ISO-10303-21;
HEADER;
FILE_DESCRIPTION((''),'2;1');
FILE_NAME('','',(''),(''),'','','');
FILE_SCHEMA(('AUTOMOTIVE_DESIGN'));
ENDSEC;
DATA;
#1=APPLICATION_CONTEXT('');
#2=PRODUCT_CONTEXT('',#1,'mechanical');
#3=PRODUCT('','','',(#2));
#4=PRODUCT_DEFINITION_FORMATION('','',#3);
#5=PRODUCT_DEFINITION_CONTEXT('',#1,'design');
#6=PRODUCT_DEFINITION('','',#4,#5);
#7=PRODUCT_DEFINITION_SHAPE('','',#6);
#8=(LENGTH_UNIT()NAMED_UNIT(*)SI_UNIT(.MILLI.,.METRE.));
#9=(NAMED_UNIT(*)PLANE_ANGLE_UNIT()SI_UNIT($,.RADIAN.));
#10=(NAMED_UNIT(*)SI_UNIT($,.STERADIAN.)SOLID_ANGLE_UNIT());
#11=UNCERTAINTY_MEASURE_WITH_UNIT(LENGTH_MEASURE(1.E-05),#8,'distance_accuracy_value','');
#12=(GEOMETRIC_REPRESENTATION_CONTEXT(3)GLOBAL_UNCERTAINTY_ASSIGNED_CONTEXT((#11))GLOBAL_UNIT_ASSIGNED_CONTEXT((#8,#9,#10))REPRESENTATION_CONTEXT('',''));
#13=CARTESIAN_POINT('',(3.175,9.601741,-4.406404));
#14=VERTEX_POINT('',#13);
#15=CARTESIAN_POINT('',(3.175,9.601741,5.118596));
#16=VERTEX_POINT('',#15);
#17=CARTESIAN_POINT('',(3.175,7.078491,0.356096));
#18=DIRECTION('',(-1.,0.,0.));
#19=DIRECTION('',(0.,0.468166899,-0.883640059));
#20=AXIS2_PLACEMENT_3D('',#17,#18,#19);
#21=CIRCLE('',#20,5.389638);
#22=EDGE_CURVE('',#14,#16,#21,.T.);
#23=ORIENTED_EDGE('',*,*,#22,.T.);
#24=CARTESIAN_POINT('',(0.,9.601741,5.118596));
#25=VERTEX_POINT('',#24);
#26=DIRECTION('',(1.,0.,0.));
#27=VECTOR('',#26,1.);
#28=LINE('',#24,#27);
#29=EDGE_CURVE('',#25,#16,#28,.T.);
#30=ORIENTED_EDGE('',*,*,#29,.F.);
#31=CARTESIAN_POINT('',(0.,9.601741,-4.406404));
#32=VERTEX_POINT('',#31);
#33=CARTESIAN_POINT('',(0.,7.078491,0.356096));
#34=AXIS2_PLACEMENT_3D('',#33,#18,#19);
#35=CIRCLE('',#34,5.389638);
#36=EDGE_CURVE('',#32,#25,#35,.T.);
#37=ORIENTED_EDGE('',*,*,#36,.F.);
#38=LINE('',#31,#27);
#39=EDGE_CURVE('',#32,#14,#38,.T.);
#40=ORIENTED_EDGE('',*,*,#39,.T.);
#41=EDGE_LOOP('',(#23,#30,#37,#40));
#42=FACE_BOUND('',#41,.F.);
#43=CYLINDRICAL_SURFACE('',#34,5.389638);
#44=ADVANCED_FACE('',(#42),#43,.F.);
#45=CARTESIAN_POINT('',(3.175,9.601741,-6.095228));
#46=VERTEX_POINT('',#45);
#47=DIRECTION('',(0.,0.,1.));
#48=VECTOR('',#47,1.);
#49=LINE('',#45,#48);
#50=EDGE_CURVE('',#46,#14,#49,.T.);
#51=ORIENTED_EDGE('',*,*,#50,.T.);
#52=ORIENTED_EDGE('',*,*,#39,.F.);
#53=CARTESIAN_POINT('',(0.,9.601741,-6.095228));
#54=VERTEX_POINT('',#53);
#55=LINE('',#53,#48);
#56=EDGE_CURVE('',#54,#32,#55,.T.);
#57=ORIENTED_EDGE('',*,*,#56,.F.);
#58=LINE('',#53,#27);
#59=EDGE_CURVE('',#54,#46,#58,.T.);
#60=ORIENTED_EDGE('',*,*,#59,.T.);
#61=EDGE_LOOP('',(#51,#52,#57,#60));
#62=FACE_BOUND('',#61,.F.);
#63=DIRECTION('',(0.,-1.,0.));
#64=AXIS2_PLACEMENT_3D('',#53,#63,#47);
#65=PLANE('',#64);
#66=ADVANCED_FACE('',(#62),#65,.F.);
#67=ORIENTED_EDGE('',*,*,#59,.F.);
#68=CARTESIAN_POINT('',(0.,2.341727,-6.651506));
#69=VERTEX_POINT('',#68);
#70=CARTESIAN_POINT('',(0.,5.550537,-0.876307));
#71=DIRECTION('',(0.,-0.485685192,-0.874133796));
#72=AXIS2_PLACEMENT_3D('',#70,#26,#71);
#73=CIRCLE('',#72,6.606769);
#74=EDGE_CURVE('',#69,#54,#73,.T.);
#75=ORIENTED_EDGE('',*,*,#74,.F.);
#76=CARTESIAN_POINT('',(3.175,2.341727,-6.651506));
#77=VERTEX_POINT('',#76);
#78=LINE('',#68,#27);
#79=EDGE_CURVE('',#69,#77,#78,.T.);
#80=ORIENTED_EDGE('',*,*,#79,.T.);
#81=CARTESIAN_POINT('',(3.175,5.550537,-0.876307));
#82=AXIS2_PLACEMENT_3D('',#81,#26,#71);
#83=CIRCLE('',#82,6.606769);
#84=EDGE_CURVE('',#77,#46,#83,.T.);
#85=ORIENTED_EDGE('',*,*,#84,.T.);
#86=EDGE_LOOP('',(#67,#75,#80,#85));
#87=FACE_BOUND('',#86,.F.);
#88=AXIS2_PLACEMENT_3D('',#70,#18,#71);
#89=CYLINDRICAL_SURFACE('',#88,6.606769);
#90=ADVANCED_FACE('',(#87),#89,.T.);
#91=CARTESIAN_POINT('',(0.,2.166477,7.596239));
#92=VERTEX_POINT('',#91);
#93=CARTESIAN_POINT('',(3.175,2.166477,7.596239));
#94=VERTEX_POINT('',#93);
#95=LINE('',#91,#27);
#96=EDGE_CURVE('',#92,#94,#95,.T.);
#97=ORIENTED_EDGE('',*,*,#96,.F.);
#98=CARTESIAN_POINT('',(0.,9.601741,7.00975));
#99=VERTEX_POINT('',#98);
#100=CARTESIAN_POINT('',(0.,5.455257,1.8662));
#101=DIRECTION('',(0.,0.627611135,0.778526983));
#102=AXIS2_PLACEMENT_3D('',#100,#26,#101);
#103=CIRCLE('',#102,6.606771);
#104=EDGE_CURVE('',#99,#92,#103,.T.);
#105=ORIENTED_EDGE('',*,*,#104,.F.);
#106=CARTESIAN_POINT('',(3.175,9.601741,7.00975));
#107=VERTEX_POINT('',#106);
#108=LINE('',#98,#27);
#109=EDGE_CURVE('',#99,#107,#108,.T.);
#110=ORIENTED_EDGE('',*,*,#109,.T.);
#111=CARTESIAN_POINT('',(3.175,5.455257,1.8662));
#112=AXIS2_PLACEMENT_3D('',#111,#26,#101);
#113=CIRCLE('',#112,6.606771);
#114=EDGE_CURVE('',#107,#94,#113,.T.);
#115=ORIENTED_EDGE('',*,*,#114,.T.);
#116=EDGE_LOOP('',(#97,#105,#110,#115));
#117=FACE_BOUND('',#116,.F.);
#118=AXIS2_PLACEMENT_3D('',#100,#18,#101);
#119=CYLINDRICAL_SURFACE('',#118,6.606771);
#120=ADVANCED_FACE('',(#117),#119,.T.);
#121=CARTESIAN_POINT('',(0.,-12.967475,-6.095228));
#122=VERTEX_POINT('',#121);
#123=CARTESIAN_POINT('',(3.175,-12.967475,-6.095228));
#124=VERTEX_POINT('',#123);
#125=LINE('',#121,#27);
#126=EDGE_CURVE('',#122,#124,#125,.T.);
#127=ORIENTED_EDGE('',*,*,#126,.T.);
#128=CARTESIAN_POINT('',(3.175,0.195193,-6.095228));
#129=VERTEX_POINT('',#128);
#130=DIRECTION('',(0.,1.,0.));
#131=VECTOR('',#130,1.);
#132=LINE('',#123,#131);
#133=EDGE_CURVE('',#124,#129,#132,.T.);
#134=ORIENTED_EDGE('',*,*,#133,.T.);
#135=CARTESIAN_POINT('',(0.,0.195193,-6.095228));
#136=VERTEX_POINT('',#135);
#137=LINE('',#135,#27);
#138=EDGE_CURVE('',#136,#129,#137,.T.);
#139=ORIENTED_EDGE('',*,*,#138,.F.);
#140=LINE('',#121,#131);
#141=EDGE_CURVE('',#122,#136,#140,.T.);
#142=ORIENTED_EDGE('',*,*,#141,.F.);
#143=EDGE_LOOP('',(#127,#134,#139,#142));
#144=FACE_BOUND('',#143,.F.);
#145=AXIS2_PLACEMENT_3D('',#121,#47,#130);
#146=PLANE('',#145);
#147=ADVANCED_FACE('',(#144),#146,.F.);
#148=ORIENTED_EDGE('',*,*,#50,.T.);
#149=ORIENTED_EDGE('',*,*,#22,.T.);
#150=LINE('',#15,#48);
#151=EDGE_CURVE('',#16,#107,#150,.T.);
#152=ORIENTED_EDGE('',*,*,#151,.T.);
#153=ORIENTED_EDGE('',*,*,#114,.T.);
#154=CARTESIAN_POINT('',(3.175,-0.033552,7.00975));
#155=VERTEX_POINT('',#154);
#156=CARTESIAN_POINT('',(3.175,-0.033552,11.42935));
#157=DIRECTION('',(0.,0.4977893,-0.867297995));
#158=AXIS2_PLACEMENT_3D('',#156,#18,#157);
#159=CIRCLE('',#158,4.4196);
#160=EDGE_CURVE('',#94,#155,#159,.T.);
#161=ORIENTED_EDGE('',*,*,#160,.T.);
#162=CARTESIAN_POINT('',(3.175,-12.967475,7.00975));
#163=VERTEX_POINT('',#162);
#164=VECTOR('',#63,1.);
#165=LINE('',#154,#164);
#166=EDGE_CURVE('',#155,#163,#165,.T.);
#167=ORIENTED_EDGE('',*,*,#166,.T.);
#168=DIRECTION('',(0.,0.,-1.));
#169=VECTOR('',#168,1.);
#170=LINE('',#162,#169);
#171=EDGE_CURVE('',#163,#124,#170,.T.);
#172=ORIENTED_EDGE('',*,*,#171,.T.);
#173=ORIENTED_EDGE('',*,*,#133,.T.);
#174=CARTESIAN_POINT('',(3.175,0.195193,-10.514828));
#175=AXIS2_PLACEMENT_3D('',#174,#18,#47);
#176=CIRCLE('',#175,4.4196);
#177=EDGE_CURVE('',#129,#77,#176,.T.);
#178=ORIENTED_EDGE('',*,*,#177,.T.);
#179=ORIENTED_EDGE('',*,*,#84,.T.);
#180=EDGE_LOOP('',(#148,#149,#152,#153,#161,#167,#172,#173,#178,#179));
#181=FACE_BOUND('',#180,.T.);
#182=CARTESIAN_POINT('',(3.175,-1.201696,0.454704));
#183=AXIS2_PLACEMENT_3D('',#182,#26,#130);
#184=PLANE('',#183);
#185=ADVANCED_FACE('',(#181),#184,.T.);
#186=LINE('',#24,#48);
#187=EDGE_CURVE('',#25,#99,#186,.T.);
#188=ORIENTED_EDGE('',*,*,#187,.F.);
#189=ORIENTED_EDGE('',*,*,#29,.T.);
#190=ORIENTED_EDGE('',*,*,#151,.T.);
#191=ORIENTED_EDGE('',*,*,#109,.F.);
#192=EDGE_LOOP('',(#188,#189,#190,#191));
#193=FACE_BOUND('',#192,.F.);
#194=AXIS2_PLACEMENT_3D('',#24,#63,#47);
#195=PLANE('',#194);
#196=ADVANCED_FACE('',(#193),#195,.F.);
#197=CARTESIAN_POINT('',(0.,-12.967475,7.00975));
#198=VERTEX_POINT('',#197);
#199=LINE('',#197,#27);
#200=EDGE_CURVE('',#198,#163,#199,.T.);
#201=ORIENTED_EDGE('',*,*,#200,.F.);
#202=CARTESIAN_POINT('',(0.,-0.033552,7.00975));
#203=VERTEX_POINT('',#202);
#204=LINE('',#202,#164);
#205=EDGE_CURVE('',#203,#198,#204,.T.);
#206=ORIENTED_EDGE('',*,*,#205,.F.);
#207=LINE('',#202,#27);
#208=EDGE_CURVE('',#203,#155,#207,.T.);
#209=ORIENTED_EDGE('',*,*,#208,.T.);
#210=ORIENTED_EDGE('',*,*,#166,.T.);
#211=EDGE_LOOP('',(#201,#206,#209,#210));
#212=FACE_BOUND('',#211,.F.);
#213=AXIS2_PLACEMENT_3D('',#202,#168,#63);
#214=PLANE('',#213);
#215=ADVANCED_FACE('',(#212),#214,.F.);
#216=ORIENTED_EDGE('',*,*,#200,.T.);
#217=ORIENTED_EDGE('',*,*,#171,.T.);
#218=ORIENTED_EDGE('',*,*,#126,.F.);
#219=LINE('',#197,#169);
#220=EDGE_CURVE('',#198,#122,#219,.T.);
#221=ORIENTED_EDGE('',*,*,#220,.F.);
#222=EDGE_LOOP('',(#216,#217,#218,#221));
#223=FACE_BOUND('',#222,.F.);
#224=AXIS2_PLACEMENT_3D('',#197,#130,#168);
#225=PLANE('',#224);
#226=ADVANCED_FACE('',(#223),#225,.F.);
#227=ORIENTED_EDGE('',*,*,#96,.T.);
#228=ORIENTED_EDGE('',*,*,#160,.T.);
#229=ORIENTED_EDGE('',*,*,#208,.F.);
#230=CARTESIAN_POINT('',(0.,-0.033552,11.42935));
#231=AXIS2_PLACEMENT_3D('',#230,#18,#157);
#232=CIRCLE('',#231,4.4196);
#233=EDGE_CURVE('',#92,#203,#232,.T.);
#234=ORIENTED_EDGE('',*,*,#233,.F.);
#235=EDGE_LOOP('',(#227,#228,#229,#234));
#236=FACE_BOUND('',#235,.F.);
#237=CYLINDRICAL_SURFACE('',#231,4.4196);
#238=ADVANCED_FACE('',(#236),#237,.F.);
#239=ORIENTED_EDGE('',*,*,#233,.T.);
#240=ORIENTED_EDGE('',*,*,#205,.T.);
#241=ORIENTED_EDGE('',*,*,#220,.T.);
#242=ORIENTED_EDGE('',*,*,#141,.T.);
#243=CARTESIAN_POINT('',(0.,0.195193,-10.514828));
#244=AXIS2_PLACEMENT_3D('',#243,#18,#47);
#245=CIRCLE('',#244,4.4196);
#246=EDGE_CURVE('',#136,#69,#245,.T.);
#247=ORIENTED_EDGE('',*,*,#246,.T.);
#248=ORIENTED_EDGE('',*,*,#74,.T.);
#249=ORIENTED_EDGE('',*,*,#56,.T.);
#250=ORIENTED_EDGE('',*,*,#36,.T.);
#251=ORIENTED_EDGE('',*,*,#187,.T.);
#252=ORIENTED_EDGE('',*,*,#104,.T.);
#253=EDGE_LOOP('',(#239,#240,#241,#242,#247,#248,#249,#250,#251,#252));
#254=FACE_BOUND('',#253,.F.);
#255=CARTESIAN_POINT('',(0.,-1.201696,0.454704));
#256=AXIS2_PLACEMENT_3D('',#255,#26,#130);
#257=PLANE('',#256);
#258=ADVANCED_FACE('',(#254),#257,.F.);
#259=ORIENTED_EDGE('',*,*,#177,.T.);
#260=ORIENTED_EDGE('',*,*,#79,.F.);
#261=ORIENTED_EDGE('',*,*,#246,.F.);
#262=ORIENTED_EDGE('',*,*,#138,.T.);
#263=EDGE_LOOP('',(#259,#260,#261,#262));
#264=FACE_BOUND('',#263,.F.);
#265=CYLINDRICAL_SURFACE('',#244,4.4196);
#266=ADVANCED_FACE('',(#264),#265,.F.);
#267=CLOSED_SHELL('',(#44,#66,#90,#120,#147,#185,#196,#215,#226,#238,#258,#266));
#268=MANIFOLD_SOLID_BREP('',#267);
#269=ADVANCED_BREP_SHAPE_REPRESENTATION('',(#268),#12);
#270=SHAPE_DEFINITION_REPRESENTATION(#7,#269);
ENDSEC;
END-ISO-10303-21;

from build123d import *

# Parameters (mm, degrees)
F1_DEPTH = 3.175


# Not quite as in the source:
# - a feature names something its author has since deleted; it is built from what else it names


with BuildPart() as f1:
    # F0 (on Right) → F1 (new body)
    with BuildSketch(Plane.YZ):
        with BuildLine():
            Line((-0.0335522907, 7.0097496485), (-12.9674749849, 7.0097496485))
            Line((-12.9674749849, 7.0097496485), (-12.9674749849, -6.0952282245))
            Line((-12.9674749849, -6.0952282245), (0.1951931324, -6.0952282245))
            ThreePointArc((0.1951931324, -6.0952282245), (1.3039147966, -6.2365574954), (2.3417274082, -6.651506498))
            ThreePointArc((2.3417274082, -6.651506498), (6.055282807, -7.4637663122), (9.6017406465, -6.0952282245))
            Line((9.6017406465, -6.0952282245), (9.6017406465, -4.4064043338))
            ThreePointArc((9.6017406465, -4.4064043338), (1.6888526066, 0.3560956662), (9.6017406465, 5.1185956662))
            Line((9.6017406465, 5.1185956662), (9.6017406465, 7.0097496485))
            ThreePointArc((9.6017406465, 7.0097496485), (5.9747824086, 8.4525130692), (2.1664773001, 7.5962394284))
            ThreePointArc((2.1664773001, 7.5962394284), (1.1048786978, 7.158888427), (-0.0335522907, 7.0097496485))
        make_face()
    extrude(amount=F1_DEPTH)


solid = f1.part
